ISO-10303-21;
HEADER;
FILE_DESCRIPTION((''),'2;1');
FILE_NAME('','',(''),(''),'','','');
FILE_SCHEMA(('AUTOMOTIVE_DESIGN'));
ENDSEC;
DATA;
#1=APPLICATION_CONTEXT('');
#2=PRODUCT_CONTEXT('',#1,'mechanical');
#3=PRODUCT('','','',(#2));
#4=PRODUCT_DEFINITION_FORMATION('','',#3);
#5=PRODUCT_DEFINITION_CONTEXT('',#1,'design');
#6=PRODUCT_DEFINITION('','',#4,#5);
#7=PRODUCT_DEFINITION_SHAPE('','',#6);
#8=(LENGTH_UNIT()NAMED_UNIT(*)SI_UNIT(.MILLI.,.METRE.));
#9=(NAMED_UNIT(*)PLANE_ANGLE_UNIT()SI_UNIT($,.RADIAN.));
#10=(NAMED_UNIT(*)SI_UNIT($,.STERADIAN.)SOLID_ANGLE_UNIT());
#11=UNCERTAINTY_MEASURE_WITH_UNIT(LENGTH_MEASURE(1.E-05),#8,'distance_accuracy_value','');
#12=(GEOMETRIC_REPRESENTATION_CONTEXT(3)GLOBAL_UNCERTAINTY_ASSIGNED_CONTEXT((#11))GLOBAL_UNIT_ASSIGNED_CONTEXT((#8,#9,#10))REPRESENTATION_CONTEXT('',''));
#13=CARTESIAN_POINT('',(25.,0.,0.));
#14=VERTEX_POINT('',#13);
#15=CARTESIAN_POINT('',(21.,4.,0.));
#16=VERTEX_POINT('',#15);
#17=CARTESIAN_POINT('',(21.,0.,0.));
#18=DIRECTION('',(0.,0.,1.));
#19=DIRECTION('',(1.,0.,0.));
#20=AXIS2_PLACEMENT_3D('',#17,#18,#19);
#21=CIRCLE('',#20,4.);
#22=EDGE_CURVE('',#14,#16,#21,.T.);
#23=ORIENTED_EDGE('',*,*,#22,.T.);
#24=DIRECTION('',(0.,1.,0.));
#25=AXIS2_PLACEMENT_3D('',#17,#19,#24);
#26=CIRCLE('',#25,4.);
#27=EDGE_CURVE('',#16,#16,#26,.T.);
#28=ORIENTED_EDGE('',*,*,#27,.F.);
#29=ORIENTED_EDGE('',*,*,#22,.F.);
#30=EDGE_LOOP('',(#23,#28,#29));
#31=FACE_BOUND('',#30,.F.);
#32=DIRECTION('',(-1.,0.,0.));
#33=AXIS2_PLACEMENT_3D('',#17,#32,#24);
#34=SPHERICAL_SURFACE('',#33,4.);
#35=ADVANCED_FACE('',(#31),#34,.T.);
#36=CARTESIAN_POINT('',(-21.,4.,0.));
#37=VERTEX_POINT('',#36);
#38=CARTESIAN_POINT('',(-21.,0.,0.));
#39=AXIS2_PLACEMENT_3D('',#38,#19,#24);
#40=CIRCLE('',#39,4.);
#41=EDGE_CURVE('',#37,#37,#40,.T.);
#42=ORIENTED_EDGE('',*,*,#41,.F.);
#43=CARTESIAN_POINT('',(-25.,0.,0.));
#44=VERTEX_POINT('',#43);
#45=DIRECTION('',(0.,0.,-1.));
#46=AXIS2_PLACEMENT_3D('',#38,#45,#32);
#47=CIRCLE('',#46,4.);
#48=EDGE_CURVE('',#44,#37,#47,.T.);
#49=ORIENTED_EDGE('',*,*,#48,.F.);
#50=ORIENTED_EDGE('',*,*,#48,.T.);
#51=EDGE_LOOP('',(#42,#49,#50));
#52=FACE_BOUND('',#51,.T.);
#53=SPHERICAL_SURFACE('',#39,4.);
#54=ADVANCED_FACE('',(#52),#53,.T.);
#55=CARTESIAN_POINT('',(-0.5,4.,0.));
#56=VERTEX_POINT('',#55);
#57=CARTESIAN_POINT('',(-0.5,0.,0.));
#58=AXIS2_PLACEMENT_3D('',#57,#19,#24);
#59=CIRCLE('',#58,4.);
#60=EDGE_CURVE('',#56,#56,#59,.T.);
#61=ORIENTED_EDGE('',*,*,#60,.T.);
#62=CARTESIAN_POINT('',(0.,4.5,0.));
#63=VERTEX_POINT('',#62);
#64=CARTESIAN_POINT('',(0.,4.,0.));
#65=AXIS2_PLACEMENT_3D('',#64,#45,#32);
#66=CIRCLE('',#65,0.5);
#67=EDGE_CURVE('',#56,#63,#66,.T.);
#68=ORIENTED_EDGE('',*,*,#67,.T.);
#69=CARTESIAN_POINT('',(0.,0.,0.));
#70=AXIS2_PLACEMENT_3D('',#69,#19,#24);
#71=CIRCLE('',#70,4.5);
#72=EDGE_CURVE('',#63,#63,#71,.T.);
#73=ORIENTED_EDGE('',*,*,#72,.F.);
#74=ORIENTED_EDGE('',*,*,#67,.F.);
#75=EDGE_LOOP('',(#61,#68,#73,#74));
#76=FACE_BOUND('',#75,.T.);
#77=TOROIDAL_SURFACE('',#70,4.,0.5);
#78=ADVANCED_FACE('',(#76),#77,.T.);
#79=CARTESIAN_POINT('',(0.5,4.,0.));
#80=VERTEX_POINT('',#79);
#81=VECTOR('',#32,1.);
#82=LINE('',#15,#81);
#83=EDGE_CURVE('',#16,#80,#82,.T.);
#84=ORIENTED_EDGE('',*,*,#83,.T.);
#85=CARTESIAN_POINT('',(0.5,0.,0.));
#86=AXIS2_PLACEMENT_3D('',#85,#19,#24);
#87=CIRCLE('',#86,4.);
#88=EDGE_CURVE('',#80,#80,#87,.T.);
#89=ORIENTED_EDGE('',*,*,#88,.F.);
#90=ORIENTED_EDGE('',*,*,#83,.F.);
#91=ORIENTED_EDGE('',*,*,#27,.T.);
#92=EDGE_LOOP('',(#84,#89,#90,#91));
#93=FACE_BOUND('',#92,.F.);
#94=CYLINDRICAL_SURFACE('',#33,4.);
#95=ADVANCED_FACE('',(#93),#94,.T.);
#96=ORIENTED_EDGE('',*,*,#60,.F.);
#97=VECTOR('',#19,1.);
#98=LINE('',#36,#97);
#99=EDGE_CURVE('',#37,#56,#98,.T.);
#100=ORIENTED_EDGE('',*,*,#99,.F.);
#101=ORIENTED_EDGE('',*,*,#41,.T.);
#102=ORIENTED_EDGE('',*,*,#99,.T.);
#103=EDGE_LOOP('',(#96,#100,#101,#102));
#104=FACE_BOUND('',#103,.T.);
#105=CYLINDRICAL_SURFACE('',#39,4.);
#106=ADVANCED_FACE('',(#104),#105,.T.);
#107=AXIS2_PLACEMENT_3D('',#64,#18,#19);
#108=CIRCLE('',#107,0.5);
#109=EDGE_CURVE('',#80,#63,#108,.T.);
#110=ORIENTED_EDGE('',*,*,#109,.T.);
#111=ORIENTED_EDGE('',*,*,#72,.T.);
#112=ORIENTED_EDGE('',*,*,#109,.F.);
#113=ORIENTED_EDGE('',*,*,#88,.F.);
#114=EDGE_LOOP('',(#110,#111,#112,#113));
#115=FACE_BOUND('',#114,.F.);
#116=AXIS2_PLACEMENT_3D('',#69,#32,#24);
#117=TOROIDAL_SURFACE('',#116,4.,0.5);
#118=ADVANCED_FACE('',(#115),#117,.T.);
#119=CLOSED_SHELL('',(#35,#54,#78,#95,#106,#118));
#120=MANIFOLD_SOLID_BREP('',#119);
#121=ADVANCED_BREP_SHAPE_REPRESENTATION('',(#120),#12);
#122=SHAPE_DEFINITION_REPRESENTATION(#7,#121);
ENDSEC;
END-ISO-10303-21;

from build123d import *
from build123d import SkipClean  # not in build123d's __all__


with BuildPart() as f1:
    # F0 (on Top) → F1 (revolve)
    with BuildSketch(Plane.XY):
        with BuildLine():
            Line((0, 4), (0, 0))
            Line((0, 0), (21, 0))
            Line((21, 0), (25, 0))
            ThreePointArc((25, 0), (23.8284271247, 2.8284271247), (21, 4))
            Line((21, 4), (0.5, 4))
            Line((0.5, 4), (0, 4))
        make_face()
        with BuildLine():
            Line((0, 4.5), (0, 4))
            Line((0, 4), (0.5, 4))
            ThreePointArc((0.5, 4), (0.3535533906, 4.3535533906), (0, 4.5))
        make_face()
    revolve(axis=Axis((10.5, 0, 0), (1, 0, 0)))

    # F2: F1 across face


with BuildPart() as f1_1:
    add(f1.part, clean=False)
    with SkipClean():  # cleaning this boolean's faces spoils the solid; the shape is the same uncleaned
        add(f1.part.mirror(Plane(origin=(0, 0, 0), x_dir=(0, -1, 0), z_dir=(-1, 0, 0))), clean=False)


solid = f1_1.part
